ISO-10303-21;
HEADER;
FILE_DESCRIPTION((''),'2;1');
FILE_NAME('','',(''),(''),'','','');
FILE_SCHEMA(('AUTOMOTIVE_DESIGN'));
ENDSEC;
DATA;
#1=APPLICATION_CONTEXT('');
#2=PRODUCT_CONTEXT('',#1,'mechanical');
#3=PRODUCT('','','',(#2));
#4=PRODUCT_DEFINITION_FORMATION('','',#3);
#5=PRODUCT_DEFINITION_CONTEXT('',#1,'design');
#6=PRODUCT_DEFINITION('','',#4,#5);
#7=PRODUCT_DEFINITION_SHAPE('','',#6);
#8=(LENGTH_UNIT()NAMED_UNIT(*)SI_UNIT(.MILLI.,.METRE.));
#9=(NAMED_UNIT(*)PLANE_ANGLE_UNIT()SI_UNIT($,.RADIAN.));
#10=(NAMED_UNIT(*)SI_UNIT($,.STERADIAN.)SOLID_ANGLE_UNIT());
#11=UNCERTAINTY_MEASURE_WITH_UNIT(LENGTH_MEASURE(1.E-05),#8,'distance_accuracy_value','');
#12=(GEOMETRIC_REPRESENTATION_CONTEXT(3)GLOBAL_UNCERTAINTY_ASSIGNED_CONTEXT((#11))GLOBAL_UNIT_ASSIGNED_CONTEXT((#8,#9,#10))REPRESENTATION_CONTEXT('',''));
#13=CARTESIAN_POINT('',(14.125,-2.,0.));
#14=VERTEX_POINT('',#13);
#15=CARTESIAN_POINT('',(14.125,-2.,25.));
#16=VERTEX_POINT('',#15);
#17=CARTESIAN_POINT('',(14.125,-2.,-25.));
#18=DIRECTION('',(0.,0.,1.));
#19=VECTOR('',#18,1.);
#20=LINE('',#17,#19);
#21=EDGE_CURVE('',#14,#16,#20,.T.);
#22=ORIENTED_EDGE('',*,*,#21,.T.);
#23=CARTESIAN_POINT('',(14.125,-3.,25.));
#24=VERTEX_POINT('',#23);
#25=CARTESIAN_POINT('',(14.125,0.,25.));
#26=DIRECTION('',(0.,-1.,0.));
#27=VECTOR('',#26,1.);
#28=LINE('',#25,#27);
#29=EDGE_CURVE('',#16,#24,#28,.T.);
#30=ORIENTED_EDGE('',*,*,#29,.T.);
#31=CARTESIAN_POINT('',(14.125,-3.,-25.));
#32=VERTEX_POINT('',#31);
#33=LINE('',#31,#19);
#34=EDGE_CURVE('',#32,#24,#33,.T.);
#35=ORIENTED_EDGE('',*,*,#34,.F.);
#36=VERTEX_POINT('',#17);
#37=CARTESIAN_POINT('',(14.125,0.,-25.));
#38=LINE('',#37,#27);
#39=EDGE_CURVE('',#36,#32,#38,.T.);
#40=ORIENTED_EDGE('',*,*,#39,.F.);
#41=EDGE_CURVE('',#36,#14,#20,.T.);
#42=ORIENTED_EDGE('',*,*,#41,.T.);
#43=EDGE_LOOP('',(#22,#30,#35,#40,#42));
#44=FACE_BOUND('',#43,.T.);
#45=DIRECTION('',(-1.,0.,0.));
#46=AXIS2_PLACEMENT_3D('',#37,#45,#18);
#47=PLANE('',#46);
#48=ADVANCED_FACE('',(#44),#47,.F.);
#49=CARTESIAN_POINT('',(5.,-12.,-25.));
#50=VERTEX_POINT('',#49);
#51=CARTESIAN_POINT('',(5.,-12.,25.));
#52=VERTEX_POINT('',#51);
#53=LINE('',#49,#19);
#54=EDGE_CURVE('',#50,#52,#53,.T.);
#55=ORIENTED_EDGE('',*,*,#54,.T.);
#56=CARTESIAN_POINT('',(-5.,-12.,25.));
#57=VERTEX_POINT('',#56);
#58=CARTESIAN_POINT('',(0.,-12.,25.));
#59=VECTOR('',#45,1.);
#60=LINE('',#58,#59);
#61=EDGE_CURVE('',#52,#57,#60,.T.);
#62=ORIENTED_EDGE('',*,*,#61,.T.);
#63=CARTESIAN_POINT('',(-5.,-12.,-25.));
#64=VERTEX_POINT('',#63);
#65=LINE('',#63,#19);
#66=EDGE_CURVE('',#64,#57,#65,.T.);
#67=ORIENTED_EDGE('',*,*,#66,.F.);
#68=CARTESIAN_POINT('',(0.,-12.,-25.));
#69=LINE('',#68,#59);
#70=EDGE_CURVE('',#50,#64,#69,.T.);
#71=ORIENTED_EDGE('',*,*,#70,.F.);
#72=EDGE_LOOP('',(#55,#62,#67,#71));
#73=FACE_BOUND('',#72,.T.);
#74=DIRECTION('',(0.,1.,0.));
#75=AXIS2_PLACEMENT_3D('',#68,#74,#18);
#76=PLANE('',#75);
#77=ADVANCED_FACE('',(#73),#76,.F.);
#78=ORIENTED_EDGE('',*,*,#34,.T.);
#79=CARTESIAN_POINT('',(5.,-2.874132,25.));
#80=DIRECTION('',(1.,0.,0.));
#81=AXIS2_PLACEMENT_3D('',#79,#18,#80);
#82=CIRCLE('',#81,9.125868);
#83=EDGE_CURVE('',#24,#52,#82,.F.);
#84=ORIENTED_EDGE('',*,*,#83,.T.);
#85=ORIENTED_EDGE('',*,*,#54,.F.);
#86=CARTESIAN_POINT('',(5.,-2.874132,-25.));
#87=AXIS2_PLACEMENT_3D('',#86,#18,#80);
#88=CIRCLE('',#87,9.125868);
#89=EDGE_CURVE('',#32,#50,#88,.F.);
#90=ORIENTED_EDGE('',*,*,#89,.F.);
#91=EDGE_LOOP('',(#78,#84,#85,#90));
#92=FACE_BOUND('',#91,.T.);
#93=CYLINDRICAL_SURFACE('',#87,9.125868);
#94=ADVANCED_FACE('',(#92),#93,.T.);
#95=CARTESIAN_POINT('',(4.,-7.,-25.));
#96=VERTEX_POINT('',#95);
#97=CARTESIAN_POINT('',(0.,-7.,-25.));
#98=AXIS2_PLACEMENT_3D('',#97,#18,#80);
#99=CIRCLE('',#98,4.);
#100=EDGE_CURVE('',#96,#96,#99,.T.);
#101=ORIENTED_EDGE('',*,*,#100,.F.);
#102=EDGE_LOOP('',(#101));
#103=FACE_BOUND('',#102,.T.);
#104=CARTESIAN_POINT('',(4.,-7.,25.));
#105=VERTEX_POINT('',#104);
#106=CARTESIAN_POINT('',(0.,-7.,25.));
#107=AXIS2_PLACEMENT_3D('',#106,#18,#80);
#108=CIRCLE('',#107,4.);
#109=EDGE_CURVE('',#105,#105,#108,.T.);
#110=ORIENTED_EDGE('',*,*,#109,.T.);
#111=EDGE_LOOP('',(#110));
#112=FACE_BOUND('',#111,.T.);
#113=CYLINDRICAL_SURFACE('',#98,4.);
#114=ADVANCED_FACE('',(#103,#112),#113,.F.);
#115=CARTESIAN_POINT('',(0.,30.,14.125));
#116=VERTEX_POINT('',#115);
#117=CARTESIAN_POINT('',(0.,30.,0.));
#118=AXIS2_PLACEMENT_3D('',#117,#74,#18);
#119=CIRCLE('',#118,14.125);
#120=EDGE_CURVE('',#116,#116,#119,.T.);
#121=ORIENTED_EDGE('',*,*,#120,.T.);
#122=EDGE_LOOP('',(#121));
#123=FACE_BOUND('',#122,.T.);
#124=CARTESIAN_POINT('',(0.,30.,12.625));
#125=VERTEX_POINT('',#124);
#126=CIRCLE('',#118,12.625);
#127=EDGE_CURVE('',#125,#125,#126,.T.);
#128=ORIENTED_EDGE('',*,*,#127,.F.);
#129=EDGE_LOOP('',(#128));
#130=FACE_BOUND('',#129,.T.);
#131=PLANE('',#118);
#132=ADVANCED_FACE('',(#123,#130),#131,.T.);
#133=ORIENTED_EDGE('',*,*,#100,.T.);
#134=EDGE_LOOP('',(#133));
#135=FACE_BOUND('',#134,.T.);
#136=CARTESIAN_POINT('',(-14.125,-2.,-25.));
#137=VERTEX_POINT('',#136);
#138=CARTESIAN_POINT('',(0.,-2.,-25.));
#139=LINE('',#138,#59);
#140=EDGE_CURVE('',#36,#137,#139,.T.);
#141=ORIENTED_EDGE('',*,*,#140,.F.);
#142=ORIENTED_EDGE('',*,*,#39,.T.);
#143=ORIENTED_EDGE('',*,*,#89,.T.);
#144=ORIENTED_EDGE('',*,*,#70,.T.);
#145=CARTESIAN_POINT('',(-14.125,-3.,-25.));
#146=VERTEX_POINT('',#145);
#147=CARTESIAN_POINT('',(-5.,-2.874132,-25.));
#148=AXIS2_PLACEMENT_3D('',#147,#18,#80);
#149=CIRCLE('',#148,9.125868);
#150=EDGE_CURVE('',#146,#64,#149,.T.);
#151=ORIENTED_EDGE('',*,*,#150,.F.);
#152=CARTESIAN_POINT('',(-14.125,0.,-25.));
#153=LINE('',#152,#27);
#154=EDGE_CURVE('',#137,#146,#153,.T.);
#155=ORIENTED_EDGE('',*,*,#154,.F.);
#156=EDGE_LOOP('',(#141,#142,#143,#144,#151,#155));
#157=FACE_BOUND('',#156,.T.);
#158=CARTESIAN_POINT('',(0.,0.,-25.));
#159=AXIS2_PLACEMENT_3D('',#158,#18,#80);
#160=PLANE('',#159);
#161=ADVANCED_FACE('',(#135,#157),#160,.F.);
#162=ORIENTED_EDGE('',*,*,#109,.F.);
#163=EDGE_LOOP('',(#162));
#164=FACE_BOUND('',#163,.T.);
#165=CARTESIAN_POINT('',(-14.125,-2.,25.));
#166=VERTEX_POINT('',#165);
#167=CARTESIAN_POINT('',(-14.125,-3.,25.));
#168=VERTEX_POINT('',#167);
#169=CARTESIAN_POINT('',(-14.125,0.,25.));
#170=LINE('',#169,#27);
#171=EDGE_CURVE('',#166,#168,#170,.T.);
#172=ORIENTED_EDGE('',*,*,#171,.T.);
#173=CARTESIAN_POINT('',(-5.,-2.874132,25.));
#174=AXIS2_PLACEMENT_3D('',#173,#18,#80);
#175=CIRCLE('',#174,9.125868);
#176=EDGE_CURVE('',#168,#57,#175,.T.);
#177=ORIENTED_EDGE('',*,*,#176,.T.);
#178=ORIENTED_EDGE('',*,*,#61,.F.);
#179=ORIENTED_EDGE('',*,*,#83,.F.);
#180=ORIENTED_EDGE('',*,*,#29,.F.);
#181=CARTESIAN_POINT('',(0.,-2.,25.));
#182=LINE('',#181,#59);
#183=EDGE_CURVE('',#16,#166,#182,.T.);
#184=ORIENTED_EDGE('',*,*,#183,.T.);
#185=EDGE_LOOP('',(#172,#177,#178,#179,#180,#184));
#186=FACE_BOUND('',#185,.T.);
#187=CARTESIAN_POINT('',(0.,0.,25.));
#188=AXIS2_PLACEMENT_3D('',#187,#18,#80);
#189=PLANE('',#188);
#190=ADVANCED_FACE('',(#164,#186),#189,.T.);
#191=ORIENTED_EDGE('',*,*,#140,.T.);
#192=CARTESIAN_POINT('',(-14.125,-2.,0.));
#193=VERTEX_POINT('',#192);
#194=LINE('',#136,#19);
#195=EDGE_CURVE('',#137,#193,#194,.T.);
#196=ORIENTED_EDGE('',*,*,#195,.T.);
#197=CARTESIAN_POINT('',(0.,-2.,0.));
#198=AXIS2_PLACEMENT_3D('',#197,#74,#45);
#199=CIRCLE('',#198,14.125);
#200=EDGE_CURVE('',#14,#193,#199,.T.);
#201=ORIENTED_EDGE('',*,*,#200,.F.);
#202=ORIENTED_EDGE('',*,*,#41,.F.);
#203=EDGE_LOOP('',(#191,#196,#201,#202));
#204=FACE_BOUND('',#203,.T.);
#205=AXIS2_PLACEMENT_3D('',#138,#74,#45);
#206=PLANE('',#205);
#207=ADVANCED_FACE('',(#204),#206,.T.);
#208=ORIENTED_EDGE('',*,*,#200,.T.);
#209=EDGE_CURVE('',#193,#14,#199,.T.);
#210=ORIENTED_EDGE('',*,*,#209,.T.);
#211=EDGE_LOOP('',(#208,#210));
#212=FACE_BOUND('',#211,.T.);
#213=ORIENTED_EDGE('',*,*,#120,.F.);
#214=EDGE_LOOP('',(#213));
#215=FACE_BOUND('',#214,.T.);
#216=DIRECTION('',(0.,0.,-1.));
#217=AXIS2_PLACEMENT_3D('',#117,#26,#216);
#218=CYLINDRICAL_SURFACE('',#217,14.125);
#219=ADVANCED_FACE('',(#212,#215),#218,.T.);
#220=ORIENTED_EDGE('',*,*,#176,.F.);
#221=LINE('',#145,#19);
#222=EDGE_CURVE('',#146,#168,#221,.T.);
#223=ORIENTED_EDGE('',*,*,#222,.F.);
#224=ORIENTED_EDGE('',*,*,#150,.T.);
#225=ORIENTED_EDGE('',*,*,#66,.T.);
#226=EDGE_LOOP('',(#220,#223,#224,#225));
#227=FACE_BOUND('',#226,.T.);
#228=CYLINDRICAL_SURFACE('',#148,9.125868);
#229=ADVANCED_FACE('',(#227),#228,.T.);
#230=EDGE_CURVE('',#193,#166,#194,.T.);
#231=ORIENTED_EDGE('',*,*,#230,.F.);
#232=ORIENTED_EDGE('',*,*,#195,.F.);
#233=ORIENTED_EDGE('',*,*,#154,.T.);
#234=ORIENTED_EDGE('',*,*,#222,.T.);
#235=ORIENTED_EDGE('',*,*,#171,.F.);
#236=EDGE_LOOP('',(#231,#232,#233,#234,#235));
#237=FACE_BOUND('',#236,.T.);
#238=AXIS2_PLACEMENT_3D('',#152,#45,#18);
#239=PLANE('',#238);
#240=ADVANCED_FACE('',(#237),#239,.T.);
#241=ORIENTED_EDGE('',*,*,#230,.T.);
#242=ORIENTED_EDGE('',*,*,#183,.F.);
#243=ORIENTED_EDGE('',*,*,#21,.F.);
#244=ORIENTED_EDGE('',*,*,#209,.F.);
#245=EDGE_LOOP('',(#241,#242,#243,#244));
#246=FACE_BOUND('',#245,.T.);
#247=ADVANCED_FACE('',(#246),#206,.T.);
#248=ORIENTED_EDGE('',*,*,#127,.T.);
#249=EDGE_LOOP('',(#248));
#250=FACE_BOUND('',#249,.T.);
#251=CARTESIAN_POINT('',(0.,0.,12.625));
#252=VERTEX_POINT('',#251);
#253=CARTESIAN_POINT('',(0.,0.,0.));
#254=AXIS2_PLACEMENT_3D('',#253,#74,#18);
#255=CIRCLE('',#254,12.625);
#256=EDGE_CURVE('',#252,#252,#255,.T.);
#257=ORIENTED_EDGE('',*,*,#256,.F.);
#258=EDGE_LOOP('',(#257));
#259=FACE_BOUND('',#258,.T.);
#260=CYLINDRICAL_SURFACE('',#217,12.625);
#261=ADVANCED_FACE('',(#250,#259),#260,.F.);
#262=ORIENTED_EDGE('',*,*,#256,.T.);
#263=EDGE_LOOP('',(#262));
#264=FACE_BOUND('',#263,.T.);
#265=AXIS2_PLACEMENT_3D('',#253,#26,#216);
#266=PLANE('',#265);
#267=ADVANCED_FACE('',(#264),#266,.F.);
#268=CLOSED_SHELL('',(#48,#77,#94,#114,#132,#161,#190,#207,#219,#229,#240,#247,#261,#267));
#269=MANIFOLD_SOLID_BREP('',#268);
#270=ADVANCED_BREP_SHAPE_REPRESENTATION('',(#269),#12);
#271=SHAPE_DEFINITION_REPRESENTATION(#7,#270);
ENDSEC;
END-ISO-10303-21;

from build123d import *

# Parameters (mm, degrees)
SKETCH1_R                = 14.125
SKETCH1_R_2              = 12.625
BOSS_EXTRUDE1_DEPTH      = 30
BOSS_EXTRUDE2_START      = 3
SKETCH2_R                = 14.125
BOSS_EXTRUDE2_DEPTH      = 3
BOSS_EXTRUDE3_DEPTH      = 25
BOSS_EXTRUDE3_DEPTH_BACK = 25
SKETCH3_R                = 4


with BuildPart() as part:
    # Sketch1 → Boss-Extrude1 (new body)
    with BuildSketch(Plane(origin=(0, 0, 0), x_dir=(1, 0, 0), z_dir=(0, 1, 0))):
        Circle(SKETCH1_R)
        Circle(SKETCH1_R_2, mode=Mode.SUBTRACT)
    extrude(amount=BOSS_EXTRUDE1_DEPTH)

    # Sketch2 → Boss-Extrude2 (add)
    with BuildSketch(Plane(origin=(0, 0, 0), x_dir=(-1, 0, 0), z_dir=(0, -1, 0)).offset(BOSS_EXTRUDE2_START)):
        Circle(SKETCH2_R)
    extrude(amount=-BOSS_EXTRUDE2_DEPTH)

    # Sketch3 → Boss-Extrude3 (add, two sides: drawn at the far end of the back side and taken through both)
    with BuildSketch(Plane.XY.offset(-BOSS_EXTRUDE3_DEPTH_BACK)):
        with BuildLine():
            Line((14.125, -2), (-14.125, -2))
            Line((-14.125, -2), (-14.125, -3))
            ThreePointArc((-14.125, -3), (-11.408307596, -9.371443813), (-5, -12))
            Line((-5, -12), (5, -12))
            ThreePointArc((5, -12), (11.408307596, -9.371443813), (14.125, -3))
            Line((14.125, -3), (14.125, -2))
        make_face()
        with Locations((0, -7)):
            Circle(SKETCH3_R, mode=Mode.SUBTRACT)
    extrude(amount=BOSS_EXTRUDE3_DEPTH + BOSS_EXTRUDE3_DEPTH_BACK)


solid = part.part
